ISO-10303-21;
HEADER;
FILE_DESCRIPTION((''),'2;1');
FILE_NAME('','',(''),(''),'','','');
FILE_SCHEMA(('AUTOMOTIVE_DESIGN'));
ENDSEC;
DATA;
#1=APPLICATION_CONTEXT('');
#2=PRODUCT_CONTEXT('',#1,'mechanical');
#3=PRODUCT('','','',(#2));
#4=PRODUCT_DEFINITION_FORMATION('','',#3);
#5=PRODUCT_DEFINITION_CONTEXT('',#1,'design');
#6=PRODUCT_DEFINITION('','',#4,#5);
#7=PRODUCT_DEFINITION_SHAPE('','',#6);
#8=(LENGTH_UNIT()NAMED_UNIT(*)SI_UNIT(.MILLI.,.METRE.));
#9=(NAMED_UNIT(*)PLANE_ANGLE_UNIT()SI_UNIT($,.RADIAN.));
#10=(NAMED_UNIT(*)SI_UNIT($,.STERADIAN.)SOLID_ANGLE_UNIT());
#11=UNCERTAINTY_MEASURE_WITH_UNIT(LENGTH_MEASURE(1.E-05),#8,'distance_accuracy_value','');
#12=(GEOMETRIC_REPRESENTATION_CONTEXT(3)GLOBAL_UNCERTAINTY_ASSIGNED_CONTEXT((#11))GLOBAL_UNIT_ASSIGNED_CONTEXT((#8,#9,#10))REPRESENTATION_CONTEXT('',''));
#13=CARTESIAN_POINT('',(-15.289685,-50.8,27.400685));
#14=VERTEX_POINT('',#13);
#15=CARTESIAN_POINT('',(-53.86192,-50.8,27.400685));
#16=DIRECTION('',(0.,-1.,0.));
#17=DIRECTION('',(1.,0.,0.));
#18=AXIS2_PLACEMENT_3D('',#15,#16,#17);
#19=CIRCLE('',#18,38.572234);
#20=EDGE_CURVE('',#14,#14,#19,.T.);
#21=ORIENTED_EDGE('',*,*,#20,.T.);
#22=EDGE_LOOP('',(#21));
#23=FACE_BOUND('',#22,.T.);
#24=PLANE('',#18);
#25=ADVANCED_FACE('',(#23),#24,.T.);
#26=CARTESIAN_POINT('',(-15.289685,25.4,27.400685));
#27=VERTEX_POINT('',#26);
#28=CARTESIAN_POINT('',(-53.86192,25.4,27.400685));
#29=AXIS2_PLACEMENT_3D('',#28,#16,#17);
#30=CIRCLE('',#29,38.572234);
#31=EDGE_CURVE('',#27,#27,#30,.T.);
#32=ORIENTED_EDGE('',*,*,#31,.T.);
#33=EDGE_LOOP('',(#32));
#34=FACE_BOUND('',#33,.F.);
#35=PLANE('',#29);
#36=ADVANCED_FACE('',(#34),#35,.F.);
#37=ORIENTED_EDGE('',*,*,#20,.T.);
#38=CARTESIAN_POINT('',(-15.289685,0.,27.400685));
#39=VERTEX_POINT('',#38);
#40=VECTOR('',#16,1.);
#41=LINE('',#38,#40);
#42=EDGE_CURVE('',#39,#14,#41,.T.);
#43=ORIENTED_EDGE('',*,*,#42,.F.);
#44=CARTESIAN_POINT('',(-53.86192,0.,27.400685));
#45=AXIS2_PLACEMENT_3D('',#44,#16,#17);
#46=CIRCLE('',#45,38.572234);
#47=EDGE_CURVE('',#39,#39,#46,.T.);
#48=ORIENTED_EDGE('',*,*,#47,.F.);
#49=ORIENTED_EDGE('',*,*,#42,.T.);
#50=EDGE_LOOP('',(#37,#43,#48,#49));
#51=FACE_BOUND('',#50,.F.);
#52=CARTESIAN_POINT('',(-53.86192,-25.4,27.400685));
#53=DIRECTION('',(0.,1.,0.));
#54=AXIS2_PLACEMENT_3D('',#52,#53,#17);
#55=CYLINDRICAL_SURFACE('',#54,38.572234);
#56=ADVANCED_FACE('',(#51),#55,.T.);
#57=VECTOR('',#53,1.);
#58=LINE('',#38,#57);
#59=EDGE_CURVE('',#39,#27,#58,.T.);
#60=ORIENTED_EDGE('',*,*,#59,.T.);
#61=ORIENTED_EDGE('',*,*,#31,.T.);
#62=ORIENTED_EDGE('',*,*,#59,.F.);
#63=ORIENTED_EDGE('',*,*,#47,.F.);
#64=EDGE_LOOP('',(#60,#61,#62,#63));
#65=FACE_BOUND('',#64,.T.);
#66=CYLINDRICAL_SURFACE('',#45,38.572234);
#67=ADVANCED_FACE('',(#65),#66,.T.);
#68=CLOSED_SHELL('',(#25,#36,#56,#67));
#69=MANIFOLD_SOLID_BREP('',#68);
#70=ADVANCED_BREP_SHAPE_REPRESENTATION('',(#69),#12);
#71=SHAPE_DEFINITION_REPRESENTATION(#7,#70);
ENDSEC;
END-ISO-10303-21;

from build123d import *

# Parameters (mm, degrees)
F0_R     = 38.572234299
F1_DEPTH = 25.4
F2_DEPTH = 25.4
F3_DEPTH = 25.4


with BuildPart() as f1:
    # F0 (on Front) → F1 (new body)
    with BuildSketch(Plane.XZ):
        with Locations((-53.8619197905, 27.4006854743)):
            Circle(F0_R)
    extrude(amount=F1_DEPTH)

    # F2 (add): faces of the model
    f2_faces = [f1.faces().sort_by_distance(p)[0] for p in [
        (-53.8619197905, -25.4, 27.4006854743),
        (-53.8619197905, 0, 27.4006854743),
    ]]
    extrude(f2_faces, amount=F2_DEPTH, dir=(0, -1, 0))

    # F3 (add): a face of the model
    f3_faces = [f1.faces().sort_by_distance(p)[0] for p in [
        (-53.8619197905, 0, 27.4006854743),
    ]]
    extrude(f3_faces, amount=F3_DEPTH)


solid = f1.part
